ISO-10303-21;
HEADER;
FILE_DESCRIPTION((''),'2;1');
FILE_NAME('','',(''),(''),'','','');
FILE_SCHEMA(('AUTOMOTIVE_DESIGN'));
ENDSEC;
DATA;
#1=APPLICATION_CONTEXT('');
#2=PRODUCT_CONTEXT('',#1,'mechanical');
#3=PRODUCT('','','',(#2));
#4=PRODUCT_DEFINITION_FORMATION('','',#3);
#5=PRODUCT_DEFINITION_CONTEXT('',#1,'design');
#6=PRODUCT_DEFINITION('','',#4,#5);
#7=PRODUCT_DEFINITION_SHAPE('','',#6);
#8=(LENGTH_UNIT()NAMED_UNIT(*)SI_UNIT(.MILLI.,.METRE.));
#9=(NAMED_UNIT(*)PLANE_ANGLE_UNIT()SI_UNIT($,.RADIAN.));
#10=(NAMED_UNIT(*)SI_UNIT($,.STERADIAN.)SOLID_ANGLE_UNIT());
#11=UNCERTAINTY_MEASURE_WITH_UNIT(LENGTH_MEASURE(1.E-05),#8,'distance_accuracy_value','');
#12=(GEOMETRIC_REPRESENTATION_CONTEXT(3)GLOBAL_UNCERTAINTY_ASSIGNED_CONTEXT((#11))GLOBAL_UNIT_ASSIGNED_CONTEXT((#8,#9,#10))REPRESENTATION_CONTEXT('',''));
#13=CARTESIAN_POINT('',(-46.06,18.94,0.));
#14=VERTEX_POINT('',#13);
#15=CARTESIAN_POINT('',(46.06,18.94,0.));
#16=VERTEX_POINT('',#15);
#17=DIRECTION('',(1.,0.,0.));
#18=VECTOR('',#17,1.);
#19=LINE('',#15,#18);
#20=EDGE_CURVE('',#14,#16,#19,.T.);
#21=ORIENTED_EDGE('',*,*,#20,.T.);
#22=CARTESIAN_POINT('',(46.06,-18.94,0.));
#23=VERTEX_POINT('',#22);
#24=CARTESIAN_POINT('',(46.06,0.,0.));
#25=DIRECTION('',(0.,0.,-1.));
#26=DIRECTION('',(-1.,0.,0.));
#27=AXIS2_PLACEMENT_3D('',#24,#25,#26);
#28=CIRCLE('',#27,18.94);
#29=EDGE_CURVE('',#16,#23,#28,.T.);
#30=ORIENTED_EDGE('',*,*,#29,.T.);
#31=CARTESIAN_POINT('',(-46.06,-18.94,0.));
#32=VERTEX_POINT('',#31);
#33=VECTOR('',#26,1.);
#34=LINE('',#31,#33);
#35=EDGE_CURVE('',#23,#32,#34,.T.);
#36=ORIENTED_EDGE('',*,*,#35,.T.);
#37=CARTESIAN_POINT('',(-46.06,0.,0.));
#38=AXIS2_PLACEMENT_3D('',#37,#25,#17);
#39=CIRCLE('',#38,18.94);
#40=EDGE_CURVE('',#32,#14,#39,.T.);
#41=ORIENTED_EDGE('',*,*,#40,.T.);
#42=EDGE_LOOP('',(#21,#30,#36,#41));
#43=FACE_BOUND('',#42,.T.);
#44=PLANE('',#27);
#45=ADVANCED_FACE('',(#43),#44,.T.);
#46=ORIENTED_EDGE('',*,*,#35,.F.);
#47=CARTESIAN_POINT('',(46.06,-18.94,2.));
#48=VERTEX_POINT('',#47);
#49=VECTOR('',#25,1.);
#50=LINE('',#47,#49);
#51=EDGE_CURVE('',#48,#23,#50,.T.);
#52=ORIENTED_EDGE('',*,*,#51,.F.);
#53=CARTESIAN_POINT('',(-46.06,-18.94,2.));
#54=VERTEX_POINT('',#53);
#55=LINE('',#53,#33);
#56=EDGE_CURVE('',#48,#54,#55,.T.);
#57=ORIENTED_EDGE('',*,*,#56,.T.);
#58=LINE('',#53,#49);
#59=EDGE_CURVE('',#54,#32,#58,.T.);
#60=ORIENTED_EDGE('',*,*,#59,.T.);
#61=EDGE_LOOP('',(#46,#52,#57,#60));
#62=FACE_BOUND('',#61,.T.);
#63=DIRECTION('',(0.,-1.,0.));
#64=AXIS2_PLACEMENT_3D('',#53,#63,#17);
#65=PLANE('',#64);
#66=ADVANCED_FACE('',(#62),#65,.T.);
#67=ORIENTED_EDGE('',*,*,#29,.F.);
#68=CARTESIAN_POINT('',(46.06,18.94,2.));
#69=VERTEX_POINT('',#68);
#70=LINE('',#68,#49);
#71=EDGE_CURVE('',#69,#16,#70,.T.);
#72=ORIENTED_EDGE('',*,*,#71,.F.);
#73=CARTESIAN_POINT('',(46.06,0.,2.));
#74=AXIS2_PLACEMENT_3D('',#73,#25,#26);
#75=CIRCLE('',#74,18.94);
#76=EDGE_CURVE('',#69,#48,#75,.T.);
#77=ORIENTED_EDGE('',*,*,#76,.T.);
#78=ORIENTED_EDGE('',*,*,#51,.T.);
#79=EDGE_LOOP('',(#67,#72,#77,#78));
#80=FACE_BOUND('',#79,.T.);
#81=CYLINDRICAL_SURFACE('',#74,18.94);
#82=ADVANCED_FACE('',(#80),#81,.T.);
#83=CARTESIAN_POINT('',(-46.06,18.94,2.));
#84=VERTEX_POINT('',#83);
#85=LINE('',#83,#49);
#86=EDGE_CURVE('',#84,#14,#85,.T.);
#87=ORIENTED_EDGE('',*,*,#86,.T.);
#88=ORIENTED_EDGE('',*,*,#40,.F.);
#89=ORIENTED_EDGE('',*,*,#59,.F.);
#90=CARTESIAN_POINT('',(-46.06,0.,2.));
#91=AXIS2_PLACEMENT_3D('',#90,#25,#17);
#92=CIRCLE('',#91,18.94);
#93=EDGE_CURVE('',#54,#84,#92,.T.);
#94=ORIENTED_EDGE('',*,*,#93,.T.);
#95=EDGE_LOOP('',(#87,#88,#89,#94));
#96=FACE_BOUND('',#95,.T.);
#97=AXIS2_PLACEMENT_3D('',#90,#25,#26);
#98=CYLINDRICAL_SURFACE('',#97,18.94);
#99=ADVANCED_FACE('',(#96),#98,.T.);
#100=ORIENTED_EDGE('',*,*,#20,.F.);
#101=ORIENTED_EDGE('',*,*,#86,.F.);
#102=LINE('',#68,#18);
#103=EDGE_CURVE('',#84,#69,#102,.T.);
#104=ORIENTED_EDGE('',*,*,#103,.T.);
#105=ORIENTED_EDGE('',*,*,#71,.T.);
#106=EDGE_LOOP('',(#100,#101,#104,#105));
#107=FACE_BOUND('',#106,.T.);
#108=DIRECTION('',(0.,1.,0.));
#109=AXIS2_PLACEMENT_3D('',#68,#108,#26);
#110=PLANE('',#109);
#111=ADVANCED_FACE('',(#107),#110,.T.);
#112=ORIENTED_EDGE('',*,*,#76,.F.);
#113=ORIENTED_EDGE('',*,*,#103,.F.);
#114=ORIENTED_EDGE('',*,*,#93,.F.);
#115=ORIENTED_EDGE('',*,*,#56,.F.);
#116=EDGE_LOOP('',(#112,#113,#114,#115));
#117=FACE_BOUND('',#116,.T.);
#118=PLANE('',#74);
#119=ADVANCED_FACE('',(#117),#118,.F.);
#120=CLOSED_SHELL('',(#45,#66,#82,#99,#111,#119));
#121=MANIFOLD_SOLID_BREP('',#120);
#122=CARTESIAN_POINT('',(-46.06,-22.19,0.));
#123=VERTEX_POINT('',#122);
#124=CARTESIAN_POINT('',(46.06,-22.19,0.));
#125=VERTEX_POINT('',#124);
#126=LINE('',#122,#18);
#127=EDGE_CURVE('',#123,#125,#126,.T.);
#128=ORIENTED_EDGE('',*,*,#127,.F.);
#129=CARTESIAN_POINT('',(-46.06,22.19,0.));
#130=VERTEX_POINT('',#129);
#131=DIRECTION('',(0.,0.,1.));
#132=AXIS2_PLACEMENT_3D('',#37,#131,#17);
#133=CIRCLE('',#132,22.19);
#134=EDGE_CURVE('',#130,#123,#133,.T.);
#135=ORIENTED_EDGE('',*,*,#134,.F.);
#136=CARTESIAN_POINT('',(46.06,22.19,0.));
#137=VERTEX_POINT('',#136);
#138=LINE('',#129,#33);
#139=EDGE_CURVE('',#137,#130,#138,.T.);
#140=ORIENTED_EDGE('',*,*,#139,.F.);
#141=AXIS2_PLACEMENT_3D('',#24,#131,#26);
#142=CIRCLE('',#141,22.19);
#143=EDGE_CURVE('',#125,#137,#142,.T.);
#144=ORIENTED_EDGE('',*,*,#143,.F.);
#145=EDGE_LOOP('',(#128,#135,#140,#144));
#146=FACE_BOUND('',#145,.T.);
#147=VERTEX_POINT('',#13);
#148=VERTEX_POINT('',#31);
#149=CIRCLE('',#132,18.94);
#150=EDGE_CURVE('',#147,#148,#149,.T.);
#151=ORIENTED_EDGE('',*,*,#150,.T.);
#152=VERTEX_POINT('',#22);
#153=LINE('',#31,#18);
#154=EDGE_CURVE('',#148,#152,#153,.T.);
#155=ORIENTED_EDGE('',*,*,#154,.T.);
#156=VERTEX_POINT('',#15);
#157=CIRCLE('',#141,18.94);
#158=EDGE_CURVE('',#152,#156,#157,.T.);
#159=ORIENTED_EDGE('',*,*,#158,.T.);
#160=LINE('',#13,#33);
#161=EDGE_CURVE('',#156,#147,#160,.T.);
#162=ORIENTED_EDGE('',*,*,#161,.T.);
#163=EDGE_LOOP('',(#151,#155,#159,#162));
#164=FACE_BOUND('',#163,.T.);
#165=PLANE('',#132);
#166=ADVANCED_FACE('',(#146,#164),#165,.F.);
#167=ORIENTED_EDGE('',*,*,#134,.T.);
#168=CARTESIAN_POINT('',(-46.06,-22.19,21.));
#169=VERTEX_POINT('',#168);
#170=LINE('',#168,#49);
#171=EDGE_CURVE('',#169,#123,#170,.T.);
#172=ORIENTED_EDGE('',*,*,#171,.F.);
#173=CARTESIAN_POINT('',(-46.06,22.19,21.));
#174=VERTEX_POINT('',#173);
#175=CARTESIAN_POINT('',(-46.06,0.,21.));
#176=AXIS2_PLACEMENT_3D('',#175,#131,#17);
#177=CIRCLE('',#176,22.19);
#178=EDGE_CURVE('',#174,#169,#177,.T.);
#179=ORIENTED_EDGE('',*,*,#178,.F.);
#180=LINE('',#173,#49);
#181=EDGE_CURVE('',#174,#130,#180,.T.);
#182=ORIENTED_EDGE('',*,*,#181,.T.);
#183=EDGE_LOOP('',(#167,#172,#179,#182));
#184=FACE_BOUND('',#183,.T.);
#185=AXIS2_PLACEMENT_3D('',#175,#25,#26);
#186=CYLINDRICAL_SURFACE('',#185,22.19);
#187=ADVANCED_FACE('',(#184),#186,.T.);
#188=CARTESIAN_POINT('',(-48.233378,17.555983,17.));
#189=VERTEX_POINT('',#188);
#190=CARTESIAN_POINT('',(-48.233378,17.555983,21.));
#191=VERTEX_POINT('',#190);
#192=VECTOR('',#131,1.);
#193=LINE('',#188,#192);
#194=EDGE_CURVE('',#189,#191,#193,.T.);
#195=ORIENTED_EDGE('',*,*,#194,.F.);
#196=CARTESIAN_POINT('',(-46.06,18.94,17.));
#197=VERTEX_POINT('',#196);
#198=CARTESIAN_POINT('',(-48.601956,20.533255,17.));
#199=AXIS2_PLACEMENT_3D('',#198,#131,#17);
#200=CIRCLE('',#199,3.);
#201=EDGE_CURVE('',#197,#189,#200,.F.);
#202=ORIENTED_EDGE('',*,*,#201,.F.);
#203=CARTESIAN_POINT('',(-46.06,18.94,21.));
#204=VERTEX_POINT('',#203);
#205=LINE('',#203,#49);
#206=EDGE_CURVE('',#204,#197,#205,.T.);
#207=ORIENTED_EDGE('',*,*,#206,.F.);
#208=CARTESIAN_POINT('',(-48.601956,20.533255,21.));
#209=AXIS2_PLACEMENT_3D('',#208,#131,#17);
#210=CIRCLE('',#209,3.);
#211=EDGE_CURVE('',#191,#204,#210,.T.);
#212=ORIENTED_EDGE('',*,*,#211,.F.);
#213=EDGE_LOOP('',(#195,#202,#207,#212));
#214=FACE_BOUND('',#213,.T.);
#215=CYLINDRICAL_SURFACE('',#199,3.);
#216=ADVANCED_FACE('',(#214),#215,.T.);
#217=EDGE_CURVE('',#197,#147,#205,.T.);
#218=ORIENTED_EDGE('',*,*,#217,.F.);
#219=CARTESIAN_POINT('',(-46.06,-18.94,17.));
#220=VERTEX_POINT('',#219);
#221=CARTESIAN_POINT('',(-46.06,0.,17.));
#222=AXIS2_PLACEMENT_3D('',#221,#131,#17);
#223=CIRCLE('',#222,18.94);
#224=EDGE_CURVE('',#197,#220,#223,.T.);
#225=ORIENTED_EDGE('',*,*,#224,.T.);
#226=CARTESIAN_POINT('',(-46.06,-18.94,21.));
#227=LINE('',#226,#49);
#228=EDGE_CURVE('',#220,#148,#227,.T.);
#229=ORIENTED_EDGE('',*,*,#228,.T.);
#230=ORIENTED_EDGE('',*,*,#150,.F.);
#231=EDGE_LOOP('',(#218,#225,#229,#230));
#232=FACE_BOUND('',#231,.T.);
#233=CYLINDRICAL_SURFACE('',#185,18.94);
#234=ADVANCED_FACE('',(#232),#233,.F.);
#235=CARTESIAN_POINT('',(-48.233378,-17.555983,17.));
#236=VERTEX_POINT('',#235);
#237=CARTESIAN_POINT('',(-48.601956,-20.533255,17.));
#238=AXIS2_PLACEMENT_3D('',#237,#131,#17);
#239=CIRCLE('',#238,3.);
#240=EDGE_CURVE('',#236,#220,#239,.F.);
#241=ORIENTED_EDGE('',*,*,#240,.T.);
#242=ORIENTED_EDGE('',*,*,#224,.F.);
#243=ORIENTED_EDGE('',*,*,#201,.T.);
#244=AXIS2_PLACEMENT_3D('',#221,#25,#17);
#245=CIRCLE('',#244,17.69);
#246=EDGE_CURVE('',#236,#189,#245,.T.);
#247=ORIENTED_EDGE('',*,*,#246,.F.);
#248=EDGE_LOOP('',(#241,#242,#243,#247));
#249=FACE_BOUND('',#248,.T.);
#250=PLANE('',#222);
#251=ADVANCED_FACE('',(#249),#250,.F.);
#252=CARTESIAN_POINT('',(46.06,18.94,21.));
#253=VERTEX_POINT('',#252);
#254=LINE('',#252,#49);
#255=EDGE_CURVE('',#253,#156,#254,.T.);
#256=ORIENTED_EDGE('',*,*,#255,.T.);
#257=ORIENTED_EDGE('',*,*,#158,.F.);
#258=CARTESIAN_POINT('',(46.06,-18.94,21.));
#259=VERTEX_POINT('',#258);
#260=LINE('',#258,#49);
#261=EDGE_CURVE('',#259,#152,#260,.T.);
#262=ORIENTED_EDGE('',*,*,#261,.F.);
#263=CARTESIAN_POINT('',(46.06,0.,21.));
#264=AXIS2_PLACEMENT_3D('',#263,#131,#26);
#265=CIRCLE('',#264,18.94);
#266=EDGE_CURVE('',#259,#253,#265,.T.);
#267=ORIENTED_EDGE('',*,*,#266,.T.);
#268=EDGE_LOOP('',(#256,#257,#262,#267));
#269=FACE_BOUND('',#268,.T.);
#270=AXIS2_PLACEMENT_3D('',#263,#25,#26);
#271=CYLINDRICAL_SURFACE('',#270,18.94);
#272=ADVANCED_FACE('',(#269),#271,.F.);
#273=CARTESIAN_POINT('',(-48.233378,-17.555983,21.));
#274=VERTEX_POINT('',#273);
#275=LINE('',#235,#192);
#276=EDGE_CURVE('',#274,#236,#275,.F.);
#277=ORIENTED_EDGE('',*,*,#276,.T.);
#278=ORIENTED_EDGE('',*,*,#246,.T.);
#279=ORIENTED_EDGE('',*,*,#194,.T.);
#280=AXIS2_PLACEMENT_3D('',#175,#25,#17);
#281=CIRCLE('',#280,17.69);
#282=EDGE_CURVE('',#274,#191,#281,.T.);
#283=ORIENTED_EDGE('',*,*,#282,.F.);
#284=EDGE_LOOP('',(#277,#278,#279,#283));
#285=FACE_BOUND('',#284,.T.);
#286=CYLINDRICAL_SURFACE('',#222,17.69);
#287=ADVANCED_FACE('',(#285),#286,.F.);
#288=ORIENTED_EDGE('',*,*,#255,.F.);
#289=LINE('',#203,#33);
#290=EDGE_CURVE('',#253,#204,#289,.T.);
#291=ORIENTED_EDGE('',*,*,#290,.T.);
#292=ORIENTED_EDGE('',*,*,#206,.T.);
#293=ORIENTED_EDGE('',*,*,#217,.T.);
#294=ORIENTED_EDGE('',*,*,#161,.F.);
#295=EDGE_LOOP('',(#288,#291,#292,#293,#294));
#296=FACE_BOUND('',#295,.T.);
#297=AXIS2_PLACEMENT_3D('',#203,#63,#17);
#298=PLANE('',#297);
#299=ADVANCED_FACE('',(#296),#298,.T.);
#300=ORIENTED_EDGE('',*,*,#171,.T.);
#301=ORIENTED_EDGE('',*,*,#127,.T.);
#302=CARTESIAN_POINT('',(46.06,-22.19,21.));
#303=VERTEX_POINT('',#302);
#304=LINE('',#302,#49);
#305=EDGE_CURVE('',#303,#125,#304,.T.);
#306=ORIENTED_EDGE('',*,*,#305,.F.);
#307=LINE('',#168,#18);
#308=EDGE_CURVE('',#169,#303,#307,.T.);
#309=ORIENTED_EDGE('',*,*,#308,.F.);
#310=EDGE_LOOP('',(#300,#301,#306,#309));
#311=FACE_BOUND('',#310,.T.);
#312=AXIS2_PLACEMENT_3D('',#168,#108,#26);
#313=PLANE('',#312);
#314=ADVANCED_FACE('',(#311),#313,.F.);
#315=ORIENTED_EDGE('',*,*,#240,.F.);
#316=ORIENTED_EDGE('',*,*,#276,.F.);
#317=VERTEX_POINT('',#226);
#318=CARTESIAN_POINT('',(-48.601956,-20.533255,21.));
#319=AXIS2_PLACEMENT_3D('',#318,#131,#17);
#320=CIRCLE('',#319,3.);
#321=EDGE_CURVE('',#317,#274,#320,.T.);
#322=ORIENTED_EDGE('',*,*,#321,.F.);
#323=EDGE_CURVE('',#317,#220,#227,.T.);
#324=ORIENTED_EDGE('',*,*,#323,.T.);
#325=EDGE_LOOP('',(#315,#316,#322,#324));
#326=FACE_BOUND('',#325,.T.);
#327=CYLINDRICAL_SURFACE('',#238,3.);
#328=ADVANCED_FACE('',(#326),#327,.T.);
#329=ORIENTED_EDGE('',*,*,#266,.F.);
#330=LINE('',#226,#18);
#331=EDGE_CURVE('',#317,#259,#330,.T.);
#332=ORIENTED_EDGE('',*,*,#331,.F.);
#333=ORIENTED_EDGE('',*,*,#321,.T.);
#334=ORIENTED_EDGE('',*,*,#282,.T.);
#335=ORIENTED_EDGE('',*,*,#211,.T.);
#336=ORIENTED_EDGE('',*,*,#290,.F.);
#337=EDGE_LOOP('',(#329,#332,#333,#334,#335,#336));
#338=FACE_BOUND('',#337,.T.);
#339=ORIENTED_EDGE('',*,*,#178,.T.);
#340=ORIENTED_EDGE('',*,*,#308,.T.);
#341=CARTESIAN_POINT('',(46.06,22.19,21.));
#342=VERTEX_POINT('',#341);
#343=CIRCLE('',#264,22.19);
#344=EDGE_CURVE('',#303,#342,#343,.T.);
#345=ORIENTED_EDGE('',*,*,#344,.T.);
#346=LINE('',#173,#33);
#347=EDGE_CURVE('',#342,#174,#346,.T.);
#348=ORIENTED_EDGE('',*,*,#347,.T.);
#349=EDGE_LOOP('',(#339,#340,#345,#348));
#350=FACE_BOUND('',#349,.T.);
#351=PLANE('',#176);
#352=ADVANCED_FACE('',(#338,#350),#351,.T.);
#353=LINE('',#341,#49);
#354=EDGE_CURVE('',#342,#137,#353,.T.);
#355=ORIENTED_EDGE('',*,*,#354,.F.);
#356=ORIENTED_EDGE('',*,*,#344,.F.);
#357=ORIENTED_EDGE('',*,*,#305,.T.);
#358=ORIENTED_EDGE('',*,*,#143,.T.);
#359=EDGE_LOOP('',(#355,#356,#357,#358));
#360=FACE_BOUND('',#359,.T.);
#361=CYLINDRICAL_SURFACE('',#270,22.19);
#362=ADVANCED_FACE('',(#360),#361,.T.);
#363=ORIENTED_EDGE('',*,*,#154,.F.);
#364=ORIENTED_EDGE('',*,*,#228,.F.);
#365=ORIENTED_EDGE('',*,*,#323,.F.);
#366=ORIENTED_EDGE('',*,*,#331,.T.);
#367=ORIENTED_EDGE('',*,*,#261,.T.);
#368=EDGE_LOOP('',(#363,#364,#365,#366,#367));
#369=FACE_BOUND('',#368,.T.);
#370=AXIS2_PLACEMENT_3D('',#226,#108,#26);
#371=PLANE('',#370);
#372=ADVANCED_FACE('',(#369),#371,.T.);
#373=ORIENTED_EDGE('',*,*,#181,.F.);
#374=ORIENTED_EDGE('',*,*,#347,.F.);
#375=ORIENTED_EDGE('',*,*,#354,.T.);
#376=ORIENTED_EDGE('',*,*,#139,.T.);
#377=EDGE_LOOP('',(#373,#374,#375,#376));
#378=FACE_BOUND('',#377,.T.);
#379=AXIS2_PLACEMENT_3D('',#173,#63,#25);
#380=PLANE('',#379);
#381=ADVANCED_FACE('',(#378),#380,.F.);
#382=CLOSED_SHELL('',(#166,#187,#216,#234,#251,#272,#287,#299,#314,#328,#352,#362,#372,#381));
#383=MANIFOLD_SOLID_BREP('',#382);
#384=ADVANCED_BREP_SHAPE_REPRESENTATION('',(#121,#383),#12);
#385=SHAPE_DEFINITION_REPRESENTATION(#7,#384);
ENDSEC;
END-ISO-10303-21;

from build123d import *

# Parameters (mm, degrees)
BOSS_EXTRUDE3_DEPTH = 21
BOSS_EXTRUDE4_DEPTH = 2
BOSS_EXTRUDE7_START = -4
BOSS_EXTRUDE7_DEPTH = 4
FILLET3_R           = 3


with BuildPart() as part:
    # Sketch1 → Boss-Extrude3 (new body)
    with BuildSketch(Plane.XY):
        with BuildLine():
            Line((-46.06, 22.19), (46.06, 22.19))
            ThreePointArc((46.06, 22.19), (68.25, 0), (46.06, -22.19))
            Line((46.06, -22.19), (-46.06, -22.19))
            ThreePointArc((-46.06, -22.19), (-68.25, 0), (-46.06, 22.19))
        make_face()
        with BuildLine():
            Line((-46.06, 18.94), (46.06, 18.94))
            ThreePointArc((46.06, 18.94), (65, 0), (46.06, -18.94))
            Line((46.06, -18.94), (-46.06, -18.94))
            ThreePointArc((-46.06, -18.94), (-65, 0), (-46.06, 18.94))
        make_face(mode=Mode.SUBTRACT)
    extrude(amount=BOSS_EXTRUDE3_DEPTH)

    # Sketch5 → Boss-Extrude7 (add)
    with BuildSketch(Plane.XY.offset(21).offset(BOSS_EXTRUDE7_START)):
        with BuildLine():
            Line((-46.06, 17.69), (-46.06, 18.94))
            ThreePointArc((-46.06, 18.94), (-65, 0), (-46.06, -18.94))
            Line((-46.06, -18.94), (-46.06, -17.69))
            ThreePointArc((-46.06, -17.69), (-63.75, 0), (-46.06, 17.69))
        make_face()
    extrude(amount=BOSS_EXTRUDE7_DEPTH)

    # Fillet3
    # the kernel refuses this fillet: 3 mm, written as the material it takes off along each edge
    with BuildSketch(Plane(origin=(-46.06, 17.69, 11.556234358), x_dir=(-1.8644641386323197e-12, 1.0, 0), z_dir=(0, 0, 1))) as fillet3_piece_1:
        with BuildLine():
            CenterArc((2.843255016, 2.541955636), FILLET3_R, 187.057140648, 50.864065739)
            Line((-0.13401734, 2.173378212), (-0.193562787, 2.166006663))
            ThreePointArc((-0.193562787, 2.166006663), (-0.093422377, 1.085060353), (-0.06, 0))
            Line((-0.06, 0), (0, -0.06))
            ThreePointArc((0, -0.06), (0.625, -0.06), (1.2181349, -0.050839113))
            Line((1.2181349, -0.050839113), (1.25, 0))
        make_face()
    extrude(amount=14.887531284, mode=Mode.SUBTRACT)
    with BuildSketch(Plane(origin=(-46.06, -17.69, 11.556234358), x_dir=(-1.8474111129741445e-12, -1.0, 0), z_dir=(0, 0, 1))) as fillet3_piece_2:
        with BuildLine():
            CenterArc((2.843255016, -2.541955636), FILLET3_R, 122.078793613, 50.864065739)
            Line((-0.13401734, -2.173378212), (-0.193562787, -2.166006663))
            ThreePointArc((-0.193562787, -2.166006663), (-0.093422377, -1.085060353), (-0.06, 0))
            Line((-0.06, 0), (0, 0.06))
            ThreePointArc((0, 0.06), (0.625, 0.06), (1.2181349, 0.050839113))
            Line((1.2181349, 0.050839113), (1.25, 0))
        make_face()
    extrude(amount=14.887531284, mode=Mode.SUBTRACT)


with BuildPart() as body_2:
    # Sketch3 → Boss-Extrude4 (new body)
    with BuildSketch(Plane(origin=(0, 0, 0), x_dir=(-1, 0, 0), z_dir=(0, 0, -1))):
        with BuildLine():
            Line((-46.06, 18.94), (46.06, 18.94))
            ThreePointArc((46.06, 18.94), (65, 0), (46.06, -18.94))
            Line((46.06, -18.94), (-46.06, -18.94))
            ThreePointArc((-46.06, -18.94), (-65, 0), (-46.06, 18.94))
        make_face()
    extrude(amount=-BOSS_EXTRUDE4_DEPTH)


solid = Compound([part.part, body_2.part])
